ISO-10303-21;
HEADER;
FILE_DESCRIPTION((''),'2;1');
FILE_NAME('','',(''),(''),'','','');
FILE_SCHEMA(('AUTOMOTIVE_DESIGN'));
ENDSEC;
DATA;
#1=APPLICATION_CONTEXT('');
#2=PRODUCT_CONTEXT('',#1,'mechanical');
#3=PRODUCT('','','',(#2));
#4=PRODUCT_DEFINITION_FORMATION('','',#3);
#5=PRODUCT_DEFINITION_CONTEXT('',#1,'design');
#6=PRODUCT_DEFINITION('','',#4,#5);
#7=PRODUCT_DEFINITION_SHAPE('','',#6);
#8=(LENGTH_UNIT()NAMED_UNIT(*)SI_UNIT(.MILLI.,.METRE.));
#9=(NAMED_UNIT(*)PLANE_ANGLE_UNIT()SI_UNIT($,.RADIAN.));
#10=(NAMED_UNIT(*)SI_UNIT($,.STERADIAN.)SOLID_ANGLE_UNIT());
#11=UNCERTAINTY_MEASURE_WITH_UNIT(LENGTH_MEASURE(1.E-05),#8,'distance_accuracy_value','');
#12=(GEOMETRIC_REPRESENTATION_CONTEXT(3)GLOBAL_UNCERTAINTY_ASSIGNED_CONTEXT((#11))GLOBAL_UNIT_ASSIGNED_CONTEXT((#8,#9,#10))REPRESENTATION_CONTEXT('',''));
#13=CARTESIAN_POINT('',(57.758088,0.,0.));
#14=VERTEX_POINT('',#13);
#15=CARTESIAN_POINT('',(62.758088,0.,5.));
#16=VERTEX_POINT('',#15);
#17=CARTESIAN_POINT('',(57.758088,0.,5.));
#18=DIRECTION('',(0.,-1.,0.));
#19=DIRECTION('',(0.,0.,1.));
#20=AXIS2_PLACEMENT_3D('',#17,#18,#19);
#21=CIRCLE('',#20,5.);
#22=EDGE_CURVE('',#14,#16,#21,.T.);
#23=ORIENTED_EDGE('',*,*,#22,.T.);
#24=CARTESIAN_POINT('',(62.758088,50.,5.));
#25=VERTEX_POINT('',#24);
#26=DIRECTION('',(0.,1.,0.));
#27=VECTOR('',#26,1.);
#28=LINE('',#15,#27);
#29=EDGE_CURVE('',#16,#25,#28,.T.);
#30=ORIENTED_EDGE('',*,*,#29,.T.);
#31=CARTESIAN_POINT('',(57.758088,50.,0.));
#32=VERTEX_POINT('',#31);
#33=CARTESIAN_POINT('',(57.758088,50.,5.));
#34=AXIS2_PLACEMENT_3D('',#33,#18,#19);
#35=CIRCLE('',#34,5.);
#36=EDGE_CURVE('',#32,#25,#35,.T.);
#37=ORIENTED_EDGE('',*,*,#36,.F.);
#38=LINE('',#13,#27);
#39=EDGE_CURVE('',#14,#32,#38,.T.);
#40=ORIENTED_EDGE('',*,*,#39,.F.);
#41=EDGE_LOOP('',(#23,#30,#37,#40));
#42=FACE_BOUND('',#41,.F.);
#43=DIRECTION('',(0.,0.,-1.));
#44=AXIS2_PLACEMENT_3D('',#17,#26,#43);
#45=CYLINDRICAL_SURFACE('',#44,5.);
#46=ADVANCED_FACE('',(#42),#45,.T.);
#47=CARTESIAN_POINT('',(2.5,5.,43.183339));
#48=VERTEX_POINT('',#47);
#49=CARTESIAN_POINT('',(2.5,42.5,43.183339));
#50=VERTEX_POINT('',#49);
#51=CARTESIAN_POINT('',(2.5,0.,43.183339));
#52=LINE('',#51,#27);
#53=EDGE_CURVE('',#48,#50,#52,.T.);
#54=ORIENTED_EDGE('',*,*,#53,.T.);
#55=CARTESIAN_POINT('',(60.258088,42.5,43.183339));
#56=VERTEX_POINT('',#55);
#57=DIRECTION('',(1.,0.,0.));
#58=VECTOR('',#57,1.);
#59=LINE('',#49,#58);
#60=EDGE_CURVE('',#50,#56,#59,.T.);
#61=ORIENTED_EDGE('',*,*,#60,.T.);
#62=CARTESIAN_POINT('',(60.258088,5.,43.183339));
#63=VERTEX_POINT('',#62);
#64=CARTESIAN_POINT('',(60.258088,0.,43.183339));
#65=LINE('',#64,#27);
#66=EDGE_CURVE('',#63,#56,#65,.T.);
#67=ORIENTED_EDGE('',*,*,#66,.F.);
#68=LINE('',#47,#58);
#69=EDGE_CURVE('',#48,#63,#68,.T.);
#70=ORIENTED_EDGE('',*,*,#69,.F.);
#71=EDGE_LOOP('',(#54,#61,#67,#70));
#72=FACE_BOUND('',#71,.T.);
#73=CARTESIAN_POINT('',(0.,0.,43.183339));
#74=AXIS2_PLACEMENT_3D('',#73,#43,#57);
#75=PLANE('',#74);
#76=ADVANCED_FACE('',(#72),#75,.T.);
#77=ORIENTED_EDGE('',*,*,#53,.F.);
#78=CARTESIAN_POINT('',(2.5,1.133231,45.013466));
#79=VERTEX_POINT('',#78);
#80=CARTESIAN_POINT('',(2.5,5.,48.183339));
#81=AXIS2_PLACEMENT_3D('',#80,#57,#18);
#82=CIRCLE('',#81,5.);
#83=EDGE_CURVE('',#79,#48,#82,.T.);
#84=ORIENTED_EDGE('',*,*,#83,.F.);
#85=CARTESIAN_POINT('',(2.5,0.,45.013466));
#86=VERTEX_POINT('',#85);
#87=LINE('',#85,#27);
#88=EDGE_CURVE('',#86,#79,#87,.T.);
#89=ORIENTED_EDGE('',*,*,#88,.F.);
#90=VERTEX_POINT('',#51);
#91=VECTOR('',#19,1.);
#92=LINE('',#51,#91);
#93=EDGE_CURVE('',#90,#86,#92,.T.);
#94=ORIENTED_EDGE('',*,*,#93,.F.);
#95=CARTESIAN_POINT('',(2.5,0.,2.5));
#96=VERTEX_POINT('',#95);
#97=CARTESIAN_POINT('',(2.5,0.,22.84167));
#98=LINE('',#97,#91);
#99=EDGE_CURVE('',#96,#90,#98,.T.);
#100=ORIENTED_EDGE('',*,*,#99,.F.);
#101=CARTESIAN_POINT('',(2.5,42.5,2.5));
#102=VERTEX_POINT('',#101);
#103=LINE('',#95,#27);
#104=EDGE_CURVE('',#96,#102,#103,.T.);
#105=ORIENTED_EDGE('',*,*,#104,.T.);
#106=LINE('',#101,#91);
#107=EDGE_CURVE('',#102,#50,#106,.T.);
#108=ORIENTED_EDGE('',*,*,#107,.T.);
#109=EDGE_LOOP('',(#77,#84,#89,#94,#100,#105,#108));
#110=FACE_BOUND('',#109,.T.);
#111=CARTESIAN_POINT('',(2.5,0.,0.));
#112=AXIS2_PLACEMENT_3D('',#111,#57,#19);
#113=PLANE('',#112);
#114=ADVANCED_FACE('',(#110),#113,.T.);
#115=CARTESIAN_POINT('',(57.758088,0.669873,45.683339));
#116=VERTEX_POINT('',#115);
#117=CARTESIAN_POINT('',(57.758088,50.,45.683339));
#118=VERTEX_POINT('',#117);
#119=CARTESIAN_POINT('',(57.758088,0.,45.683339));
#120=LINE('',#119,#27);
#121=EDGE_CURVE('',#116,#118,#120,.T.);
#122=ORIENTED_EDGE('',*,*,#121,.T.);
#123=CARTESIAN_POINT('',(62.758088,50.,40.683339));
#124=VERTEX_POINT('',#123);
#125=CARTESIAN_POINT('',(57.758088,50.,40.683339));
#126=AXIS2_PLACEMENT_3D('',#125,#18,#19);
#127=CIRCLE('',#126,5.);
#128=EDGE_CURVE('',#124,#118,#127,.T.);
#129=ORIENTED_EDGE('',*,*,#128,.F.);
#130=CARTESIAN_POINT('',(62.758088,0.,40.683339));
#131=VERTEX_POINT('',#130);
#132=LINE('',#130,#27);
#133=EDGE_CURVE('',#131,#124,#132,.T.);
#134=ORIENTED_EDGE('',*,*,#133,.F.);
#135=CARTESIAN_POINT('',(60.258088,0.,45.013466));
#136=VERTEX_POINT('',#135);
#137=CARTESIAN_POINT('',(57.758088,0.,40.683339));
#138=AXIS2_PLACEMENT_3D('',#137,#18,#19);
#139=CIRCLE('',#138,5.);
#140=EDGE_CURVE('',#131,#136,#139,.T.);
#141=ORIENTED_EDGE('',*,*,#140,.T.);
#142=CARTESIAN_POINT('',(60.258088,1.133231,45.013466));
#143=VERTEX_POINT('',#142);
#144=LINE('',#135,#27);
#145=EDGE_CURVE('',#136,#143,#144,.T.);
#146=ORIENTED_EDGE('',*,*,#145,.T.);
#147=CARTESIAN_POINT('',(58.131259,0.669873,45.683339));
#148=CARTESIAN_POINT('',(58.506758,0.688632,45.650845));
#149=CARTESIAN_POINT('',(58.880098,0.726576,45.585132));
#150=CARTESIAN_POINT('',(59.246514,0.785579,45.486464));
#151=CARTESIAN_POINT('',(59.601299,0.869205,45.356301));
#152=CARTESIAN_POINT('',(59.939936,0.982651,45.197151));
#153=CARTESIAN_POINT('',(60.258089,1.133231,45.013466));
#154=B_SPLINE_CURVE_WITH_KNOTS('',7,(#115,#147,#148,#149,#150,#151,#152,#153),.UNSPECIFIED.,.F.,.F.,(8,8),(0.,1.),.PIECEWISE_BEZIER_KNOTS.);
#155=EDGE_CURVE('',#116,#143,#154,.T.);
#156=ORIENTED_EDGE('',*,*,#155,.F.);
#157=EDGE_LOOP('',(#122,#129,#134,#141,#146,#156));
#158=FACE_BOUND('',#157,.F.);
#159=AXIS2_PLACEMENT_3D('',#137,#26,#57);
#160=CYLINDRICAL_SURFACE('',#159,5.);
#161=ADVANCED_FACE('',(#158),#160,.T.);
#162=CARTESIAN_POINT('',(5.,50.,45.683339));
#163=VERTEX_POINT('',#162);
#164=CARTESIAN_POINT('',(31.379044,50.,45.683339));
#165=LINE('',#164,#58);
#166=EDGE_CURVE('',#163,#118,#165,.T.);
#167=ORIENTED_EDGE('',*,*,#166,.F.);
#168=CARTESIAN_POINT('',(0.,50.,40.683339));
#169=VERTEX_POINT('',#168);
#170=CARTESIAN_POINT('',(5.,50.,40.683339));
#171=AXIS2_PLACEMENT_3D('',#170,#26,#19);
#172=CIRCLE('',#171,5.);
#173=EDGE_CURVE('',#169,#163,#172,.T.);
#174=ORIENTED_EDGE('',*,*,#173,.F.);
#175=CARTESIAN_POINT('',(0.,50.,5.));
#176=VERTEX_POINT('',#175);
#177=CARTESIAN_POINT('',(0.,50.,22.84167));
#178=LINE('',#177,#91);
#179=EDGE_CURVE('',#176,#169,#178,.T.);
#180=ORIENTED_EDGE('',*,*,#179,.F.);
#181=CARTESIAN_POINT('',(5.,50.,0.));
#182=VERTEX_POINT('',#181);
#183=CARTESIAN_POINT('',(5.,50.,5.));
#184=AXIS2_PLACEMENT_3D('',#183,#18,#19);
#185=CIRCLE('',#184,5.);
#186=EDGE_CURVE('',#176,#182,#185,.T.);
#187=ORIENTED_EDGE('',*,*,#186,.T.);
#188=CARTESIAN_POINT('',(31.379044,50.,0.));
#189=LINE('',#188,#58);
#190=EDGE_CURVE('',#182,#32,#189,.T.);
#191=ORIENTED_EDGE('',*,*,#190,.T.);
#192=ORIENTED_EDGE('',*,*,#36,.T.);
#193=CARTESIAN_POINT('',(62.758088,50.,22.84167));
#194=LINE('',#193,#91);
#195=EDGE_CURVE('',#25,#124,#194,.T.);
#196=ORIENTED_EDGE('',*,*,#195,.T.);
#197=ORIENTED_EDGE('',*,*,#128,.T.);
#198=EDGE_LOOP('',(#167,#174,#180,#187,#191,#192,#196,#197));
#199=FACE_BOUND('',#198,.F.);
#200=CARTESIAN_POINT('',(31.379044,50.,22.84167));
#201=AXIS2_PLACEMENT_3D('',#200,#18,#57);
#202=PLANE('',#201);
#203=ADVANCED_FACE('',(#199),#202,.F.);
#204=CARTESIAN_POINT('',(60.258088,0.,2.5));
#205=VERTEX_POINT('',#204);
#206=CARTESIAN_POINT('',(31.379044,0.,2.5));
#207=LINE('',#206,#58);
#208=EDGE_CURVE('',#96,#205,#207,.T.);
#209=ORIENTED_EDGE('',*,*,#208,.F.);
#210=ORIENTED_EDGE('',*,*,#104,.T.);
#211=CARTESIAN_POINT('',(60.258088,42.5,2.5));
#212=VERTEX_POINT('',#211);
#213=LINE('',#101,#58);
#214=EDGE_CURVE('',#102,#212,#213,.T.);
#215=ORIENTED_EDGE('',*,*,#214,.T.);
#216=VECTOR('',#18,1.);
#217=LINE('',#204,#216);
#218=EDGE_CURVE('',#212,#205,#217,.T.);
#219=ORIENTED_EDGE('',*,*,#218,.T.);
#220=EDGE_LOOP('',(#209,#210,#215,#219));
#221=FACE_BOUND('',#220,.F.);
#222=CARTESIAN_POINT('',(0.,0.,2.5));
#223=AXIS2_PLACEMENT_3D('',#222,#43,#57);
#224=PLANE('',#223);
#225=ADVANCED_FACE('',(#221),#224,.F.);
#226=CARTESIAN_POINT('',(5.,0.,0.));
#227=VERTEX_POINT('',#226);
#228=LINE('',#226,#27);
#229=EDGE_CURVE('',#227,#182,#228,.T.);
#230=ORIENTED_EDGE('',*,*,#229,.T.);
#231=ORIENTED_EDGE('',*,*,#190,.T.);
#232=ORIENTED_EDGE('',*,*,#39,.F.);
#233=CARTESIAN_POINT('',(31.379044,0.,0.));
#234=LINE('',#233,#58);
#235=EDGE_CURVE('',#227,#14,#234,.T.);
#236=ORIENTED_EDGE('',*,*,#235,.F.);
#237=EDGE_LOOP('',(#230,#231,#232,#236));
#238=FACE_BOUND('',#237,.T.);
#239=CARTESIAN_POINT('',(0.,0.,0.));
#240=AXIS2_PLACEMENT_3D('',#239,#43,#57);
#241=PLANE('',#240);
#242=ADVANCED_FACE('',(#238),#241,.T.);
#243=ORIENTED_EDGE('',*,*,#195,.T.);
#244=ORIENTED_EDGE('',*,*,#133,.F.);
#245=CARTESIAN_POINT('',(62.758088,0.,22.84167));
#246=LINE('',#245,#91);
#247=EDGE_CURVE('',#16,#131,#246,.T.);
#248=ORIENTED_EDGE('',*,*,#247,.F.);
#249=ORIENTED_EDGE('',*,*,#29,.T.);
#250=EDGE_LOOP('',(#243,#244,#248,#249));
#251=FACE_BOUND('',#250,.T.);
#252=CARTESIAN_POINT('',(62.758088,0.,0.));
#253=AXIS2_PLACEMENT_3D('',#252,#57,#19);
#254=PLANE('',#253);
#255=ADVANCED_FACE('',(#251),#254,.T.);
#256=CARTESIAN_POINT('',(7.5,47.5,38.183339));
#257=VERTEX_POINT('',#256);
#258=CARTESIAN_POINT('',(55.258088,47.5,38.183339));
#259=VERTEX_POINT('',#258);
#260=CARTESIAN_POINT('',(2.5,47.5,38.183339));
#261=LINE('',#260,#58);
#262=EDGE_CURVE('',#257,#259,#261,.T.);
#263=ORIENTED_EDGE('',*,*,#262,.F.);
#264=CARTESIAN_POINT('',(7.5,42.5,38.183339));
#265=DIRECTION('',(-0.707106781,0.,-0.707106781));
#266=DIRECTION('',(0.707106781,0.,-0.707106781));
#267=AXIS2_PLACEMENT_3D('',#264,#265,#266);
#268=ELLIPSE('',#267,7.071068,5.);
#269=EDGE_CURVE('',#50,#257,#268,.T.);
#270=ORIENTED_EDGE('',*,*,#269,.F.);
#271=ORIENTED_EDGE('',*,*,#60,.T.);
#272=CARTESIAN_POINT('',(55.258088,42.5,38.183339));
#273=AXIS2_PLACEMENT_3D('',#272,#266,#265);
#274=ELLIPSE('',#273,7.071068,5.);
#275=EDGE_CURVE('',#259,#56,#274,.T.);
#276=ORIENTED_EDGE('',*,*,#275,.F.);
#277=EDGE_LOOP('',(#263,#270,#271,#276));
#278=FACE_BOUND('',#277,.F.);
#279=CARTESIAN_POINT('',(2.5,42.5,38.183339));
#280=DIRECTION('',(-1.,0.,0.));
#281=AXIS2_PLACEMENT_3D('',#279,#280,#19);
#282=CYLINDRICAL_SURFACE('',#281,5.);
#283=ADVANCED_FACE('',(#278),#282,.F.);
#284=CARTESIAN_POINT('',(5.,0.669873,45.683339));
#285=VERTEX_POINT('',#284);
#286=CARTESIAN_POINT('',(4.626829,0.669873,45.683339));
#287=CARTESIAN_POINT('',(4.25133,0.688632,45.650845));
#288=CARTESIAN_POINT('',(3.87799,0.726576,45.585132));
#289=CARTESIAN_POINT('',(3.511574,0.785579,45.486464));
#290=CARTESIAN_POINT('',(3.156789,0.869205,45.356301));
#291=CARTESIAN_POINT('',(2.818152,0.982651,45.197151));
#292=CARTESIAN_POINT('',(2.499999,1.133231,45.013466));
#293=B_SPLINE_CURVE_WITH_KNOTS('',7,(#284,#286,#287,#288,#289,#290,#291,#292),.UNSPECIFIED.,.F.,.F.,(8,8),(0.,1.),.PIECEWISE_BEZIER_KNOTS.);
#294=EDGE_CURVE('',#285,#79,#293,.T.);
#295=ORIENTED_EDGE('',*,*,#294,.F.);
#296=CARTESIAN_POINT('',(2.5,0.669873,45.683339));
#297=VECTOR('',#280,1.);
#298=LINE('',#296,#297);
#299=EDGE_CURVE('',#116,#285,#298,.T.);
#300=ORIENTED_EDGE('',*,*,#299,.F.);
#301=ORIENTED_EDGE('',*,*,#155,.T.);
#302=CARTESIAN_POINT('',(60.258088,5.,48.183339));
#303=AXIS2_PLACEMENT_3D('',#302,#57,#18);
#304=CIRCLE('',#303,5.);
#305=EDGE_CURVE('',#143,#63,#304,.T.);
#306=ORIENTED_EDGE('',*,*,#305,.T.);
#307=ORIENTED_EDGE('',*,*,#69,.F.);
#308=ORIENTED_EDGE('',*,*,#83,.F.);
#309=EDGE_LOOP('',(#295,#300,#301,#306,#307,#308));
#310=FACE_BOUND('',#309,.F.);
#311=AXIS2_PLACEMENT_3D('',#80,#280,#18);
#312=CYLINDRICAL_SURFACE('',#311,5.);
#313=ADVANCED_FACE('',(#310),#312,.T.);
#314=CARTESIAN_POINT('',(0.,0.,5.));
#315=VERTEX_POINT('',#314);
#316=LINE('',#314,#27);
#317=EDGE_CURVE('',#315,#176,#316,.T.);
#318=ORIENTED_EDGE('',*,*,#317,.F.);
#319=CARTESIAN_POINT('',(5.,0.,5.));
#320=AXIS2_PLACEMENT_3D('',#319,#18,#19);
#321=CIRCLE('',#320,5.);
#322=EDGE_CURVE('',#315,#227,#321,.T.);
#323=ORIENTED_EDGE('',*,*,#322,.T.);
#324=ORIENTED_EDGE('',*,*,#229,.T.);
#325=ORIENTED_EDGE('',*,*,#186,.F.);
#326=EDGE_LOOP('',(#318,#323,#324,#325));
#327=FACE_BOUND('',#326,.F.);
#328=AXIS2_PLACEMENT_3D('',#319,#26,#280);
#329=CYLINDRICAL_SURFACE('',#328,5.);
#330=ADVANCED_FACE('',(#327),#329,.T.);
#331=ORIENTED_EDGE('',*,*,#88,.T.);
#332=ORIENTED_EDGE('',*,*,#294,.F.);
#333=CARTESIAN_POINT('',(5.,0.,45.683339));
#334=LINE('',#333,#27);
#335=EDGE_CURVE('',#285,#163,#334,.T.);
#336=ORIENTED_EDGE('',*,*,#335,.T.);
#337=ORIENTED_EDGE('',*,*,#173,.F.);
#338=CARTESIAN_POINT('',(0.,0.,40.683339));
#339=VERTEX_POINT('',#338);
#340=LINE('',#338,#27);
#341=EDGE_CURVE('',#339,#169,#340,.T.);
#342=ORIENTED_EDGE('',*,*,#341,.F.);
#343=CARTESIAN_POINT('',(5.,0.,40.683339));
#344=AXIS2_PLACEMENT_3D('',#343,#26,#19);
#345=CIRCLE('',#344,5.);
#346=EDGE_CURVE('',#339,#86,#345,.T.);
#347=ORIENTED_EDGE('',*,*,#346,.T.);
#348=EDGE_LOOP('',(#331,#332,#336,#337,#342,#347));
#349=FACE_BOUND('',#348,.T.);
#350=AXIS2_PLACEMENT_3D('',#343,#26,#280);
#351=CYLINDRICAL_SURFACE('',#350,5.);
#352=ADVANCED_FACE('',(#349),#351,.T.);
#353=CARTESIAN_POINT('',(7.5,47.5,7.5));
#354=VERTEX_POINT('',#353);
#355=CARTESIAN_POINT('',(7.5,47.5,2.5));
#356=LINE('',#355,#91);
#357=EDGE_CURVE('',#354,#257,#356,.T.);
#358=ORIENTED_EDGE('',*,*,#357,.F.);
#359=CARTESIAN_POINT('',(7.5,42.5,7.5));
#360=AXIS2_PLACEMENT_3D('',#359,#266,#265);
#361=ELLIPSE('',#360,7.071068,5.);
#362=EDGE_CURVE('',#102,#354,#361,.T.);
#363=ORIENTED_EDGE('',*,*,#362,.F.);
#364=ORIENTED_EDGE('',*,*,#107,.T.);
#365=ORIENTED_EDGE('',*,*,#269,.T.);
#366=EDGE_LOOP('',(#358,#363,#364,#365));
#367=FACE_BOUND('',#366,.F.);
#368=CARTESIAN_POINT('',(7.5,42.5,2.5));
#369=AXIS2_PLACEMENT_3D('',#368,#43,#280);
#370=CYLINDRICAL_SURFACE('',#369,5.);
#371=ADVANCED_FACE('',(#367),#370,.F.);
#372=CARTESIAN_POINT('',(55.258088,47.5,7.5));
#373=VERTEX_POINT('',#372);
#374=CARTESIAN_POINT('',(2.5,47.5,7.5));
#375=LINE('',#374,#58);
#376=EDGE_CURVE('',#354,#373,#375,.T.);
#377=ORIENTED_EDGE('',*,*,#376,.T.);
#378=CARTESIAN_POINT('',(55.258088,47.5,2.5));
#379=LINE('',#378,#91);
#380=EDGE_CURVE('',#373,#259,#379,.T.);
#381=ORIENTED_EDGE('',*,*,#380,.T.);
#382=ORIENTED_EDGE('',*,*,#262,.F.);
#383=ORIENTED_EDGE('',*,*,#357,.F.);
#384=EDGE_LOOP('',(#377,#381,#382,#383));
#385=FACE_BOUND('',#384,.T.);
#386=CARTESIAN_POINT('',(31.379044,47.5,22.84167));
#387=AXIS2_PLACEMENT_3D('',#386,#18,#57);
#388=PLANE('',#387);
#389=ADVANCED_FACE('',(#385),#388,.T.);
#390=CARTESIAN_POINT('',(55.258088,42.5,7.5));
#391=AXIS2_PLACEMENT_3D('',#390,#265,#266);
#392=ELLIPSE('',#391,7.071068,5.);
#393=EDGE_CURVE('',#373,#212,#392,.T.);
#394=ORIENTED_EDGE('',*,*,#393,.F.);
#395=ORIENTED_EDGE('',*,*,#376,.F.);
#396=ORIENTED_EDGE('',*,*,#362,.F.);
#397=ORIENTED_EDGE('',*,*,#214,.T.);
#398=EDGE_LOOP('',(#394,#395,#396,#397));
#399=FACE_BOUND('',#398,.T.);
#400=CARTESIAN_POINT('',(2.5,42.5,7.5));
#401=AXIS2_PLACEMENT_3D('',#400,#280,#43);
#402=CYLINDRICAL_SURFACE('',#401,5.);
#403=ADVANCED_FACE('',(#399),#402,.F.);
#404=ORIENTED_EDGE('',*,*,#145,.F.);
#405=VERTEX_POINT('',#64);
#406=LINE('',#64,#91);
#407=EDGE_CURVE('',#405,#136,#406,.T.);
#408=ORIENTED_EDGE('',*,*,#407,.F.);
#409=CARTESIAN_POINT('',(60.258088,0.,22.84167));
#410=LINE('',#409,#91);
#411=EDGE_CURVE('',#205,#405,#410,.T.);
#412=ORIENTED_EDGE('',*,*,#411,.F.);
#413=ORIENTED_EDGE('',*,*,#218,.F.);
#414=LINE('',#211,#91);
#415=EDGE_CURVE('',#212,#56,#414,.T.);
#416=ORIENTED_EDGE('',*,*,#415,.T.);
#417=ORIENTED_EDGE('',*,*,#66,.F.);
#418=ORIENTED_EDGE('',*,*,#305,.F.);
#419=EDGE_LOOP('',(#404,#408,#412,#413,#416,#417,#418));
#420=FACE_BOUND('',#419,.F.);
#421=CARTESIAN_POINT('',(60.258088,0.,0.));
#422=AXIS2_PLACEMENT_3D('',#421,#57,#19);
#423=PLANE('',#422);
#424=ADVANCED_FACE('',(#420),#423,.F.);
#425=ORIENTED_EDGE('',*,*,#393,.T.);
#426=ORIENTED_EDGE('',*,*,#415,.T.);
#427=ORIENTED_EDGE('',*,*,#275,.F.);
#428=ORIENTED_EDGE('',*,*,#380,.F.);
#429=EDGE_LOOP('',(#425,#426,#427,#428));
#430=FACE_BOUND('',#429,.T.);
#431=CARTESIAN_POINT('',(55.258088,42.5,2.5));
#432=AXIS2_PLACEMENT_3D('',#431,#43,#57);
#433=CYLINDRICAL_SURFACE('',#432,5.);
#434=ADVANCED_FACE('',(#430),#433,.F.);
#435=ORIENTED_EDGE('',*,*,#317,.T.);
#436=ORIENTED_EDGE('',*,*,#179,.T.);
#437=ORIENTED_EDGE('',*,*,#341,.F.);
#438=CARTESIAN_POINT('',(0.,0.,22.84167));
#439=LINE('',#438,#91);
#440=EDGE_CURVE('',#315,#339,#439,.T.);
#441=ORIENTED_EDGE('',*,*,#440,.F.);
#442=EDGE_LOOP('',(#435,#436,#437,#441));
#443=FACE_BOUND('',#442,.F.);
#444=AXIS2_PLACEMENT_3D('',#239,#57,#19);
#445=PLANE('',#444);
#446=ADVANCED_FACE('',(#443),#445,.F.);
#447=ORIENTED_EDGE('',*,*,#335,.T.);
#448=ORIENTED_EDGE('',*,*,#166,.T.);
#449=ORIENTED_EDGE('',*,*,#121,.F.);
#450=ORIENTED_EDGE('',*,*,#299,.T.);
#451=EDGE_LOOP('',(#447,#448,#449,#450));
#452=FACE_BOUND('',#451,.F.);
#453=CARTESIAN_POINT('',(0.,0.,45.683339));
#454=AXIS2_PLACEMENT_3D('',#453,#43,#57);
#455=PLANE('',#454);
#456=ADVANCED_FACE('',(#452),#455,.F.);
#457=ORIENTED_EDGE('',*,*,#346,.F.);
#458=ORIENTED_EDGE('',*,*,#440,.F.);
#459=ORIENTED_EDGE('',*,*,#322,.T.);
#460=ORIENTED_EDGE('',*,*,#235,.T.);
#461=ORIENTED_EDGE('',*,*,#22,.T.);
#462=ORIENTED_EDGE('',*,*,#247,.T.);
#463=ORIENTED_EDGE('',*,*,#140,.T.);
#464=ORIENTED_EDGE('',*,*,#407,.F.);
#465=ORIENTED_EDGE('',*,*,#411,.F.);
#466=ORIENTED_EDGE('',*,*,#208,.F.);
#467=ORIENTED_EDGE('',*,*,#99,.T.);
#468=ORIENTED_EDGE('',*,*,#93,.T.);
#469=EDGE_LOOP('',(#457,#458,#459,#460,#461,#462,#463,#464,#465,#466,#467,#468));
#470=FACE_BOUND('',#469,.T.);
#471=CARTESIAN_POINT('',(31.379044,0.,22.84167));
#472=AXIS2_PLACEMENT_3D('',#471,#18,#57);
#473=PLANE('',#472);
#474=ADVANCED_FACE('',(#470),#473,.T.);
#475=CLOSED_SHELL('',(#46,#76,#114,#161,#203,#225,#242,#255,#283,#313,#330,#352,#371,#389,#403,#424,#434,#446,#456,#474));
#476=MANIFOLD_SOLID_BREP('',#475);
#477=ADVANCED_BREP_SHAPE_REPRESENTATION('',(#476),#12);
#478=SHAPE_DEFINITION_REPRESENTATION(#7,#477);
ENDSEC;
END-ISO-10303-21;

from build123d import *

# Parameters (mm, degrees)
F0_W        = 62.7580881119
F0_H        = 45.6833392382
F1_DEPTH    = 50
F2_T        = -2.5
F3_R        = 5
F4_T1_DEPTH = 40.6833392382
F4_T3_DEPTH = 57.7580881119
F4_T5_DEPTH = 57.7580881119


# Not quite as in the source:
# - a fillet or chamfer that OpenCascade refuses, or shapes differently, is made with other operations: its cross-section is extruded or revolved along the edge and cut away or added


with BuildPart() as f1:
    # F0 (on Front) → F1 (new body)
    with BuildSketch(Plane.XZ):
        with Locations((31.3790440559, 22.8416696191)):
            Rectangle(F0_W, F0_H)
    extrude(amount=-F1_DEPTH)

    # F2
    f2_openings = [f1.faces().sort_by_distance(p)[0] for p in [
        (31.379044, 0, 22.84167),
    ]]
    offset(amount=F2_T, openings=f2_openings)

    # F3
    f3_edges = [f1.edges().sort_by_distance(p)[0] for p in [
        (0, 25, 45.683339),
        (62.758088, 25, 45.683339),
        (62.758088, 25, 0),
        (0, 25, 0),
    ]]
    fillet(f3_edges, radius=F3_R)

    # F4: fillet of radius 5 on 5 edges, made by hand

    # F4_s2 → F4_t1 (join)
    with BuildSketch(Plane.XY.offset(2.5)):
        with BuildLine():
            ThreePointArc((2.5, 42.5), (3.9644660941, 46.0355339059), (7.5, 47.5))
            Line((7.5, 47.5), (2.5, 47.5))
            Line((2.5, 47.5), (2.5, 42.5))
        make_face()
        with BuildLine():
            ThreePointArc((60.2580881119, 42.5), (58.7936220178, 46.0355339059), (55.2580881119, 47.5))
            Line((55.2580881119, 47.5), (60.2580881119, 47.5))
            Line((60.2580881119, 47.5), (60.2580881119, 42.5))
        make_face()
    extrude(amount=F4_T1_DEPTH)

    # F4_s4 → F4_t3 (join)
    with BuildSketch(Plane.YZ.offset(2.5)):
        with BuildLine():
            ThreePointArc((42.5, 2.5), (46.0355339059, 3.9644660941), (47.5, 7.5))
            Line((47.5, 7.5), (47.5, 2.5))
            Line((47.5, 2.5), (42.5, 2.5))
        make_face()
        with BuildLine():
            ThreePointArc((42.5, 43.1833392382), (46.0355339059, 41.7188731441), (47.5, 38.1833392382))
            Line((47.5, 38.1833392382), (47.5, 43.1833392382))
            Line((47.5, 43.1833392382), (42.5, 43.1833392382))
        make_face()
    extrude(amount=F4_T3_DEPTH)

    # F4_s6 → F4_t5 (cut)
    with BuildSketch(Plane.YZ.offset(2.5)):
        with BuildLine():
            ThreePointArc((0, 48.1833392382), (1.4644660941, 44.6478053322), (5, 43.1833392382))
            Line((5, 43.1833392382), (0, 43.1833392382))
            Line((0, 43.1833392382), (0, 48.1833392382))
        make_face()
    extrude(amount=F4_T5_DEPTH, mode=Mode.SUBTRACT)


solid = f1.part
